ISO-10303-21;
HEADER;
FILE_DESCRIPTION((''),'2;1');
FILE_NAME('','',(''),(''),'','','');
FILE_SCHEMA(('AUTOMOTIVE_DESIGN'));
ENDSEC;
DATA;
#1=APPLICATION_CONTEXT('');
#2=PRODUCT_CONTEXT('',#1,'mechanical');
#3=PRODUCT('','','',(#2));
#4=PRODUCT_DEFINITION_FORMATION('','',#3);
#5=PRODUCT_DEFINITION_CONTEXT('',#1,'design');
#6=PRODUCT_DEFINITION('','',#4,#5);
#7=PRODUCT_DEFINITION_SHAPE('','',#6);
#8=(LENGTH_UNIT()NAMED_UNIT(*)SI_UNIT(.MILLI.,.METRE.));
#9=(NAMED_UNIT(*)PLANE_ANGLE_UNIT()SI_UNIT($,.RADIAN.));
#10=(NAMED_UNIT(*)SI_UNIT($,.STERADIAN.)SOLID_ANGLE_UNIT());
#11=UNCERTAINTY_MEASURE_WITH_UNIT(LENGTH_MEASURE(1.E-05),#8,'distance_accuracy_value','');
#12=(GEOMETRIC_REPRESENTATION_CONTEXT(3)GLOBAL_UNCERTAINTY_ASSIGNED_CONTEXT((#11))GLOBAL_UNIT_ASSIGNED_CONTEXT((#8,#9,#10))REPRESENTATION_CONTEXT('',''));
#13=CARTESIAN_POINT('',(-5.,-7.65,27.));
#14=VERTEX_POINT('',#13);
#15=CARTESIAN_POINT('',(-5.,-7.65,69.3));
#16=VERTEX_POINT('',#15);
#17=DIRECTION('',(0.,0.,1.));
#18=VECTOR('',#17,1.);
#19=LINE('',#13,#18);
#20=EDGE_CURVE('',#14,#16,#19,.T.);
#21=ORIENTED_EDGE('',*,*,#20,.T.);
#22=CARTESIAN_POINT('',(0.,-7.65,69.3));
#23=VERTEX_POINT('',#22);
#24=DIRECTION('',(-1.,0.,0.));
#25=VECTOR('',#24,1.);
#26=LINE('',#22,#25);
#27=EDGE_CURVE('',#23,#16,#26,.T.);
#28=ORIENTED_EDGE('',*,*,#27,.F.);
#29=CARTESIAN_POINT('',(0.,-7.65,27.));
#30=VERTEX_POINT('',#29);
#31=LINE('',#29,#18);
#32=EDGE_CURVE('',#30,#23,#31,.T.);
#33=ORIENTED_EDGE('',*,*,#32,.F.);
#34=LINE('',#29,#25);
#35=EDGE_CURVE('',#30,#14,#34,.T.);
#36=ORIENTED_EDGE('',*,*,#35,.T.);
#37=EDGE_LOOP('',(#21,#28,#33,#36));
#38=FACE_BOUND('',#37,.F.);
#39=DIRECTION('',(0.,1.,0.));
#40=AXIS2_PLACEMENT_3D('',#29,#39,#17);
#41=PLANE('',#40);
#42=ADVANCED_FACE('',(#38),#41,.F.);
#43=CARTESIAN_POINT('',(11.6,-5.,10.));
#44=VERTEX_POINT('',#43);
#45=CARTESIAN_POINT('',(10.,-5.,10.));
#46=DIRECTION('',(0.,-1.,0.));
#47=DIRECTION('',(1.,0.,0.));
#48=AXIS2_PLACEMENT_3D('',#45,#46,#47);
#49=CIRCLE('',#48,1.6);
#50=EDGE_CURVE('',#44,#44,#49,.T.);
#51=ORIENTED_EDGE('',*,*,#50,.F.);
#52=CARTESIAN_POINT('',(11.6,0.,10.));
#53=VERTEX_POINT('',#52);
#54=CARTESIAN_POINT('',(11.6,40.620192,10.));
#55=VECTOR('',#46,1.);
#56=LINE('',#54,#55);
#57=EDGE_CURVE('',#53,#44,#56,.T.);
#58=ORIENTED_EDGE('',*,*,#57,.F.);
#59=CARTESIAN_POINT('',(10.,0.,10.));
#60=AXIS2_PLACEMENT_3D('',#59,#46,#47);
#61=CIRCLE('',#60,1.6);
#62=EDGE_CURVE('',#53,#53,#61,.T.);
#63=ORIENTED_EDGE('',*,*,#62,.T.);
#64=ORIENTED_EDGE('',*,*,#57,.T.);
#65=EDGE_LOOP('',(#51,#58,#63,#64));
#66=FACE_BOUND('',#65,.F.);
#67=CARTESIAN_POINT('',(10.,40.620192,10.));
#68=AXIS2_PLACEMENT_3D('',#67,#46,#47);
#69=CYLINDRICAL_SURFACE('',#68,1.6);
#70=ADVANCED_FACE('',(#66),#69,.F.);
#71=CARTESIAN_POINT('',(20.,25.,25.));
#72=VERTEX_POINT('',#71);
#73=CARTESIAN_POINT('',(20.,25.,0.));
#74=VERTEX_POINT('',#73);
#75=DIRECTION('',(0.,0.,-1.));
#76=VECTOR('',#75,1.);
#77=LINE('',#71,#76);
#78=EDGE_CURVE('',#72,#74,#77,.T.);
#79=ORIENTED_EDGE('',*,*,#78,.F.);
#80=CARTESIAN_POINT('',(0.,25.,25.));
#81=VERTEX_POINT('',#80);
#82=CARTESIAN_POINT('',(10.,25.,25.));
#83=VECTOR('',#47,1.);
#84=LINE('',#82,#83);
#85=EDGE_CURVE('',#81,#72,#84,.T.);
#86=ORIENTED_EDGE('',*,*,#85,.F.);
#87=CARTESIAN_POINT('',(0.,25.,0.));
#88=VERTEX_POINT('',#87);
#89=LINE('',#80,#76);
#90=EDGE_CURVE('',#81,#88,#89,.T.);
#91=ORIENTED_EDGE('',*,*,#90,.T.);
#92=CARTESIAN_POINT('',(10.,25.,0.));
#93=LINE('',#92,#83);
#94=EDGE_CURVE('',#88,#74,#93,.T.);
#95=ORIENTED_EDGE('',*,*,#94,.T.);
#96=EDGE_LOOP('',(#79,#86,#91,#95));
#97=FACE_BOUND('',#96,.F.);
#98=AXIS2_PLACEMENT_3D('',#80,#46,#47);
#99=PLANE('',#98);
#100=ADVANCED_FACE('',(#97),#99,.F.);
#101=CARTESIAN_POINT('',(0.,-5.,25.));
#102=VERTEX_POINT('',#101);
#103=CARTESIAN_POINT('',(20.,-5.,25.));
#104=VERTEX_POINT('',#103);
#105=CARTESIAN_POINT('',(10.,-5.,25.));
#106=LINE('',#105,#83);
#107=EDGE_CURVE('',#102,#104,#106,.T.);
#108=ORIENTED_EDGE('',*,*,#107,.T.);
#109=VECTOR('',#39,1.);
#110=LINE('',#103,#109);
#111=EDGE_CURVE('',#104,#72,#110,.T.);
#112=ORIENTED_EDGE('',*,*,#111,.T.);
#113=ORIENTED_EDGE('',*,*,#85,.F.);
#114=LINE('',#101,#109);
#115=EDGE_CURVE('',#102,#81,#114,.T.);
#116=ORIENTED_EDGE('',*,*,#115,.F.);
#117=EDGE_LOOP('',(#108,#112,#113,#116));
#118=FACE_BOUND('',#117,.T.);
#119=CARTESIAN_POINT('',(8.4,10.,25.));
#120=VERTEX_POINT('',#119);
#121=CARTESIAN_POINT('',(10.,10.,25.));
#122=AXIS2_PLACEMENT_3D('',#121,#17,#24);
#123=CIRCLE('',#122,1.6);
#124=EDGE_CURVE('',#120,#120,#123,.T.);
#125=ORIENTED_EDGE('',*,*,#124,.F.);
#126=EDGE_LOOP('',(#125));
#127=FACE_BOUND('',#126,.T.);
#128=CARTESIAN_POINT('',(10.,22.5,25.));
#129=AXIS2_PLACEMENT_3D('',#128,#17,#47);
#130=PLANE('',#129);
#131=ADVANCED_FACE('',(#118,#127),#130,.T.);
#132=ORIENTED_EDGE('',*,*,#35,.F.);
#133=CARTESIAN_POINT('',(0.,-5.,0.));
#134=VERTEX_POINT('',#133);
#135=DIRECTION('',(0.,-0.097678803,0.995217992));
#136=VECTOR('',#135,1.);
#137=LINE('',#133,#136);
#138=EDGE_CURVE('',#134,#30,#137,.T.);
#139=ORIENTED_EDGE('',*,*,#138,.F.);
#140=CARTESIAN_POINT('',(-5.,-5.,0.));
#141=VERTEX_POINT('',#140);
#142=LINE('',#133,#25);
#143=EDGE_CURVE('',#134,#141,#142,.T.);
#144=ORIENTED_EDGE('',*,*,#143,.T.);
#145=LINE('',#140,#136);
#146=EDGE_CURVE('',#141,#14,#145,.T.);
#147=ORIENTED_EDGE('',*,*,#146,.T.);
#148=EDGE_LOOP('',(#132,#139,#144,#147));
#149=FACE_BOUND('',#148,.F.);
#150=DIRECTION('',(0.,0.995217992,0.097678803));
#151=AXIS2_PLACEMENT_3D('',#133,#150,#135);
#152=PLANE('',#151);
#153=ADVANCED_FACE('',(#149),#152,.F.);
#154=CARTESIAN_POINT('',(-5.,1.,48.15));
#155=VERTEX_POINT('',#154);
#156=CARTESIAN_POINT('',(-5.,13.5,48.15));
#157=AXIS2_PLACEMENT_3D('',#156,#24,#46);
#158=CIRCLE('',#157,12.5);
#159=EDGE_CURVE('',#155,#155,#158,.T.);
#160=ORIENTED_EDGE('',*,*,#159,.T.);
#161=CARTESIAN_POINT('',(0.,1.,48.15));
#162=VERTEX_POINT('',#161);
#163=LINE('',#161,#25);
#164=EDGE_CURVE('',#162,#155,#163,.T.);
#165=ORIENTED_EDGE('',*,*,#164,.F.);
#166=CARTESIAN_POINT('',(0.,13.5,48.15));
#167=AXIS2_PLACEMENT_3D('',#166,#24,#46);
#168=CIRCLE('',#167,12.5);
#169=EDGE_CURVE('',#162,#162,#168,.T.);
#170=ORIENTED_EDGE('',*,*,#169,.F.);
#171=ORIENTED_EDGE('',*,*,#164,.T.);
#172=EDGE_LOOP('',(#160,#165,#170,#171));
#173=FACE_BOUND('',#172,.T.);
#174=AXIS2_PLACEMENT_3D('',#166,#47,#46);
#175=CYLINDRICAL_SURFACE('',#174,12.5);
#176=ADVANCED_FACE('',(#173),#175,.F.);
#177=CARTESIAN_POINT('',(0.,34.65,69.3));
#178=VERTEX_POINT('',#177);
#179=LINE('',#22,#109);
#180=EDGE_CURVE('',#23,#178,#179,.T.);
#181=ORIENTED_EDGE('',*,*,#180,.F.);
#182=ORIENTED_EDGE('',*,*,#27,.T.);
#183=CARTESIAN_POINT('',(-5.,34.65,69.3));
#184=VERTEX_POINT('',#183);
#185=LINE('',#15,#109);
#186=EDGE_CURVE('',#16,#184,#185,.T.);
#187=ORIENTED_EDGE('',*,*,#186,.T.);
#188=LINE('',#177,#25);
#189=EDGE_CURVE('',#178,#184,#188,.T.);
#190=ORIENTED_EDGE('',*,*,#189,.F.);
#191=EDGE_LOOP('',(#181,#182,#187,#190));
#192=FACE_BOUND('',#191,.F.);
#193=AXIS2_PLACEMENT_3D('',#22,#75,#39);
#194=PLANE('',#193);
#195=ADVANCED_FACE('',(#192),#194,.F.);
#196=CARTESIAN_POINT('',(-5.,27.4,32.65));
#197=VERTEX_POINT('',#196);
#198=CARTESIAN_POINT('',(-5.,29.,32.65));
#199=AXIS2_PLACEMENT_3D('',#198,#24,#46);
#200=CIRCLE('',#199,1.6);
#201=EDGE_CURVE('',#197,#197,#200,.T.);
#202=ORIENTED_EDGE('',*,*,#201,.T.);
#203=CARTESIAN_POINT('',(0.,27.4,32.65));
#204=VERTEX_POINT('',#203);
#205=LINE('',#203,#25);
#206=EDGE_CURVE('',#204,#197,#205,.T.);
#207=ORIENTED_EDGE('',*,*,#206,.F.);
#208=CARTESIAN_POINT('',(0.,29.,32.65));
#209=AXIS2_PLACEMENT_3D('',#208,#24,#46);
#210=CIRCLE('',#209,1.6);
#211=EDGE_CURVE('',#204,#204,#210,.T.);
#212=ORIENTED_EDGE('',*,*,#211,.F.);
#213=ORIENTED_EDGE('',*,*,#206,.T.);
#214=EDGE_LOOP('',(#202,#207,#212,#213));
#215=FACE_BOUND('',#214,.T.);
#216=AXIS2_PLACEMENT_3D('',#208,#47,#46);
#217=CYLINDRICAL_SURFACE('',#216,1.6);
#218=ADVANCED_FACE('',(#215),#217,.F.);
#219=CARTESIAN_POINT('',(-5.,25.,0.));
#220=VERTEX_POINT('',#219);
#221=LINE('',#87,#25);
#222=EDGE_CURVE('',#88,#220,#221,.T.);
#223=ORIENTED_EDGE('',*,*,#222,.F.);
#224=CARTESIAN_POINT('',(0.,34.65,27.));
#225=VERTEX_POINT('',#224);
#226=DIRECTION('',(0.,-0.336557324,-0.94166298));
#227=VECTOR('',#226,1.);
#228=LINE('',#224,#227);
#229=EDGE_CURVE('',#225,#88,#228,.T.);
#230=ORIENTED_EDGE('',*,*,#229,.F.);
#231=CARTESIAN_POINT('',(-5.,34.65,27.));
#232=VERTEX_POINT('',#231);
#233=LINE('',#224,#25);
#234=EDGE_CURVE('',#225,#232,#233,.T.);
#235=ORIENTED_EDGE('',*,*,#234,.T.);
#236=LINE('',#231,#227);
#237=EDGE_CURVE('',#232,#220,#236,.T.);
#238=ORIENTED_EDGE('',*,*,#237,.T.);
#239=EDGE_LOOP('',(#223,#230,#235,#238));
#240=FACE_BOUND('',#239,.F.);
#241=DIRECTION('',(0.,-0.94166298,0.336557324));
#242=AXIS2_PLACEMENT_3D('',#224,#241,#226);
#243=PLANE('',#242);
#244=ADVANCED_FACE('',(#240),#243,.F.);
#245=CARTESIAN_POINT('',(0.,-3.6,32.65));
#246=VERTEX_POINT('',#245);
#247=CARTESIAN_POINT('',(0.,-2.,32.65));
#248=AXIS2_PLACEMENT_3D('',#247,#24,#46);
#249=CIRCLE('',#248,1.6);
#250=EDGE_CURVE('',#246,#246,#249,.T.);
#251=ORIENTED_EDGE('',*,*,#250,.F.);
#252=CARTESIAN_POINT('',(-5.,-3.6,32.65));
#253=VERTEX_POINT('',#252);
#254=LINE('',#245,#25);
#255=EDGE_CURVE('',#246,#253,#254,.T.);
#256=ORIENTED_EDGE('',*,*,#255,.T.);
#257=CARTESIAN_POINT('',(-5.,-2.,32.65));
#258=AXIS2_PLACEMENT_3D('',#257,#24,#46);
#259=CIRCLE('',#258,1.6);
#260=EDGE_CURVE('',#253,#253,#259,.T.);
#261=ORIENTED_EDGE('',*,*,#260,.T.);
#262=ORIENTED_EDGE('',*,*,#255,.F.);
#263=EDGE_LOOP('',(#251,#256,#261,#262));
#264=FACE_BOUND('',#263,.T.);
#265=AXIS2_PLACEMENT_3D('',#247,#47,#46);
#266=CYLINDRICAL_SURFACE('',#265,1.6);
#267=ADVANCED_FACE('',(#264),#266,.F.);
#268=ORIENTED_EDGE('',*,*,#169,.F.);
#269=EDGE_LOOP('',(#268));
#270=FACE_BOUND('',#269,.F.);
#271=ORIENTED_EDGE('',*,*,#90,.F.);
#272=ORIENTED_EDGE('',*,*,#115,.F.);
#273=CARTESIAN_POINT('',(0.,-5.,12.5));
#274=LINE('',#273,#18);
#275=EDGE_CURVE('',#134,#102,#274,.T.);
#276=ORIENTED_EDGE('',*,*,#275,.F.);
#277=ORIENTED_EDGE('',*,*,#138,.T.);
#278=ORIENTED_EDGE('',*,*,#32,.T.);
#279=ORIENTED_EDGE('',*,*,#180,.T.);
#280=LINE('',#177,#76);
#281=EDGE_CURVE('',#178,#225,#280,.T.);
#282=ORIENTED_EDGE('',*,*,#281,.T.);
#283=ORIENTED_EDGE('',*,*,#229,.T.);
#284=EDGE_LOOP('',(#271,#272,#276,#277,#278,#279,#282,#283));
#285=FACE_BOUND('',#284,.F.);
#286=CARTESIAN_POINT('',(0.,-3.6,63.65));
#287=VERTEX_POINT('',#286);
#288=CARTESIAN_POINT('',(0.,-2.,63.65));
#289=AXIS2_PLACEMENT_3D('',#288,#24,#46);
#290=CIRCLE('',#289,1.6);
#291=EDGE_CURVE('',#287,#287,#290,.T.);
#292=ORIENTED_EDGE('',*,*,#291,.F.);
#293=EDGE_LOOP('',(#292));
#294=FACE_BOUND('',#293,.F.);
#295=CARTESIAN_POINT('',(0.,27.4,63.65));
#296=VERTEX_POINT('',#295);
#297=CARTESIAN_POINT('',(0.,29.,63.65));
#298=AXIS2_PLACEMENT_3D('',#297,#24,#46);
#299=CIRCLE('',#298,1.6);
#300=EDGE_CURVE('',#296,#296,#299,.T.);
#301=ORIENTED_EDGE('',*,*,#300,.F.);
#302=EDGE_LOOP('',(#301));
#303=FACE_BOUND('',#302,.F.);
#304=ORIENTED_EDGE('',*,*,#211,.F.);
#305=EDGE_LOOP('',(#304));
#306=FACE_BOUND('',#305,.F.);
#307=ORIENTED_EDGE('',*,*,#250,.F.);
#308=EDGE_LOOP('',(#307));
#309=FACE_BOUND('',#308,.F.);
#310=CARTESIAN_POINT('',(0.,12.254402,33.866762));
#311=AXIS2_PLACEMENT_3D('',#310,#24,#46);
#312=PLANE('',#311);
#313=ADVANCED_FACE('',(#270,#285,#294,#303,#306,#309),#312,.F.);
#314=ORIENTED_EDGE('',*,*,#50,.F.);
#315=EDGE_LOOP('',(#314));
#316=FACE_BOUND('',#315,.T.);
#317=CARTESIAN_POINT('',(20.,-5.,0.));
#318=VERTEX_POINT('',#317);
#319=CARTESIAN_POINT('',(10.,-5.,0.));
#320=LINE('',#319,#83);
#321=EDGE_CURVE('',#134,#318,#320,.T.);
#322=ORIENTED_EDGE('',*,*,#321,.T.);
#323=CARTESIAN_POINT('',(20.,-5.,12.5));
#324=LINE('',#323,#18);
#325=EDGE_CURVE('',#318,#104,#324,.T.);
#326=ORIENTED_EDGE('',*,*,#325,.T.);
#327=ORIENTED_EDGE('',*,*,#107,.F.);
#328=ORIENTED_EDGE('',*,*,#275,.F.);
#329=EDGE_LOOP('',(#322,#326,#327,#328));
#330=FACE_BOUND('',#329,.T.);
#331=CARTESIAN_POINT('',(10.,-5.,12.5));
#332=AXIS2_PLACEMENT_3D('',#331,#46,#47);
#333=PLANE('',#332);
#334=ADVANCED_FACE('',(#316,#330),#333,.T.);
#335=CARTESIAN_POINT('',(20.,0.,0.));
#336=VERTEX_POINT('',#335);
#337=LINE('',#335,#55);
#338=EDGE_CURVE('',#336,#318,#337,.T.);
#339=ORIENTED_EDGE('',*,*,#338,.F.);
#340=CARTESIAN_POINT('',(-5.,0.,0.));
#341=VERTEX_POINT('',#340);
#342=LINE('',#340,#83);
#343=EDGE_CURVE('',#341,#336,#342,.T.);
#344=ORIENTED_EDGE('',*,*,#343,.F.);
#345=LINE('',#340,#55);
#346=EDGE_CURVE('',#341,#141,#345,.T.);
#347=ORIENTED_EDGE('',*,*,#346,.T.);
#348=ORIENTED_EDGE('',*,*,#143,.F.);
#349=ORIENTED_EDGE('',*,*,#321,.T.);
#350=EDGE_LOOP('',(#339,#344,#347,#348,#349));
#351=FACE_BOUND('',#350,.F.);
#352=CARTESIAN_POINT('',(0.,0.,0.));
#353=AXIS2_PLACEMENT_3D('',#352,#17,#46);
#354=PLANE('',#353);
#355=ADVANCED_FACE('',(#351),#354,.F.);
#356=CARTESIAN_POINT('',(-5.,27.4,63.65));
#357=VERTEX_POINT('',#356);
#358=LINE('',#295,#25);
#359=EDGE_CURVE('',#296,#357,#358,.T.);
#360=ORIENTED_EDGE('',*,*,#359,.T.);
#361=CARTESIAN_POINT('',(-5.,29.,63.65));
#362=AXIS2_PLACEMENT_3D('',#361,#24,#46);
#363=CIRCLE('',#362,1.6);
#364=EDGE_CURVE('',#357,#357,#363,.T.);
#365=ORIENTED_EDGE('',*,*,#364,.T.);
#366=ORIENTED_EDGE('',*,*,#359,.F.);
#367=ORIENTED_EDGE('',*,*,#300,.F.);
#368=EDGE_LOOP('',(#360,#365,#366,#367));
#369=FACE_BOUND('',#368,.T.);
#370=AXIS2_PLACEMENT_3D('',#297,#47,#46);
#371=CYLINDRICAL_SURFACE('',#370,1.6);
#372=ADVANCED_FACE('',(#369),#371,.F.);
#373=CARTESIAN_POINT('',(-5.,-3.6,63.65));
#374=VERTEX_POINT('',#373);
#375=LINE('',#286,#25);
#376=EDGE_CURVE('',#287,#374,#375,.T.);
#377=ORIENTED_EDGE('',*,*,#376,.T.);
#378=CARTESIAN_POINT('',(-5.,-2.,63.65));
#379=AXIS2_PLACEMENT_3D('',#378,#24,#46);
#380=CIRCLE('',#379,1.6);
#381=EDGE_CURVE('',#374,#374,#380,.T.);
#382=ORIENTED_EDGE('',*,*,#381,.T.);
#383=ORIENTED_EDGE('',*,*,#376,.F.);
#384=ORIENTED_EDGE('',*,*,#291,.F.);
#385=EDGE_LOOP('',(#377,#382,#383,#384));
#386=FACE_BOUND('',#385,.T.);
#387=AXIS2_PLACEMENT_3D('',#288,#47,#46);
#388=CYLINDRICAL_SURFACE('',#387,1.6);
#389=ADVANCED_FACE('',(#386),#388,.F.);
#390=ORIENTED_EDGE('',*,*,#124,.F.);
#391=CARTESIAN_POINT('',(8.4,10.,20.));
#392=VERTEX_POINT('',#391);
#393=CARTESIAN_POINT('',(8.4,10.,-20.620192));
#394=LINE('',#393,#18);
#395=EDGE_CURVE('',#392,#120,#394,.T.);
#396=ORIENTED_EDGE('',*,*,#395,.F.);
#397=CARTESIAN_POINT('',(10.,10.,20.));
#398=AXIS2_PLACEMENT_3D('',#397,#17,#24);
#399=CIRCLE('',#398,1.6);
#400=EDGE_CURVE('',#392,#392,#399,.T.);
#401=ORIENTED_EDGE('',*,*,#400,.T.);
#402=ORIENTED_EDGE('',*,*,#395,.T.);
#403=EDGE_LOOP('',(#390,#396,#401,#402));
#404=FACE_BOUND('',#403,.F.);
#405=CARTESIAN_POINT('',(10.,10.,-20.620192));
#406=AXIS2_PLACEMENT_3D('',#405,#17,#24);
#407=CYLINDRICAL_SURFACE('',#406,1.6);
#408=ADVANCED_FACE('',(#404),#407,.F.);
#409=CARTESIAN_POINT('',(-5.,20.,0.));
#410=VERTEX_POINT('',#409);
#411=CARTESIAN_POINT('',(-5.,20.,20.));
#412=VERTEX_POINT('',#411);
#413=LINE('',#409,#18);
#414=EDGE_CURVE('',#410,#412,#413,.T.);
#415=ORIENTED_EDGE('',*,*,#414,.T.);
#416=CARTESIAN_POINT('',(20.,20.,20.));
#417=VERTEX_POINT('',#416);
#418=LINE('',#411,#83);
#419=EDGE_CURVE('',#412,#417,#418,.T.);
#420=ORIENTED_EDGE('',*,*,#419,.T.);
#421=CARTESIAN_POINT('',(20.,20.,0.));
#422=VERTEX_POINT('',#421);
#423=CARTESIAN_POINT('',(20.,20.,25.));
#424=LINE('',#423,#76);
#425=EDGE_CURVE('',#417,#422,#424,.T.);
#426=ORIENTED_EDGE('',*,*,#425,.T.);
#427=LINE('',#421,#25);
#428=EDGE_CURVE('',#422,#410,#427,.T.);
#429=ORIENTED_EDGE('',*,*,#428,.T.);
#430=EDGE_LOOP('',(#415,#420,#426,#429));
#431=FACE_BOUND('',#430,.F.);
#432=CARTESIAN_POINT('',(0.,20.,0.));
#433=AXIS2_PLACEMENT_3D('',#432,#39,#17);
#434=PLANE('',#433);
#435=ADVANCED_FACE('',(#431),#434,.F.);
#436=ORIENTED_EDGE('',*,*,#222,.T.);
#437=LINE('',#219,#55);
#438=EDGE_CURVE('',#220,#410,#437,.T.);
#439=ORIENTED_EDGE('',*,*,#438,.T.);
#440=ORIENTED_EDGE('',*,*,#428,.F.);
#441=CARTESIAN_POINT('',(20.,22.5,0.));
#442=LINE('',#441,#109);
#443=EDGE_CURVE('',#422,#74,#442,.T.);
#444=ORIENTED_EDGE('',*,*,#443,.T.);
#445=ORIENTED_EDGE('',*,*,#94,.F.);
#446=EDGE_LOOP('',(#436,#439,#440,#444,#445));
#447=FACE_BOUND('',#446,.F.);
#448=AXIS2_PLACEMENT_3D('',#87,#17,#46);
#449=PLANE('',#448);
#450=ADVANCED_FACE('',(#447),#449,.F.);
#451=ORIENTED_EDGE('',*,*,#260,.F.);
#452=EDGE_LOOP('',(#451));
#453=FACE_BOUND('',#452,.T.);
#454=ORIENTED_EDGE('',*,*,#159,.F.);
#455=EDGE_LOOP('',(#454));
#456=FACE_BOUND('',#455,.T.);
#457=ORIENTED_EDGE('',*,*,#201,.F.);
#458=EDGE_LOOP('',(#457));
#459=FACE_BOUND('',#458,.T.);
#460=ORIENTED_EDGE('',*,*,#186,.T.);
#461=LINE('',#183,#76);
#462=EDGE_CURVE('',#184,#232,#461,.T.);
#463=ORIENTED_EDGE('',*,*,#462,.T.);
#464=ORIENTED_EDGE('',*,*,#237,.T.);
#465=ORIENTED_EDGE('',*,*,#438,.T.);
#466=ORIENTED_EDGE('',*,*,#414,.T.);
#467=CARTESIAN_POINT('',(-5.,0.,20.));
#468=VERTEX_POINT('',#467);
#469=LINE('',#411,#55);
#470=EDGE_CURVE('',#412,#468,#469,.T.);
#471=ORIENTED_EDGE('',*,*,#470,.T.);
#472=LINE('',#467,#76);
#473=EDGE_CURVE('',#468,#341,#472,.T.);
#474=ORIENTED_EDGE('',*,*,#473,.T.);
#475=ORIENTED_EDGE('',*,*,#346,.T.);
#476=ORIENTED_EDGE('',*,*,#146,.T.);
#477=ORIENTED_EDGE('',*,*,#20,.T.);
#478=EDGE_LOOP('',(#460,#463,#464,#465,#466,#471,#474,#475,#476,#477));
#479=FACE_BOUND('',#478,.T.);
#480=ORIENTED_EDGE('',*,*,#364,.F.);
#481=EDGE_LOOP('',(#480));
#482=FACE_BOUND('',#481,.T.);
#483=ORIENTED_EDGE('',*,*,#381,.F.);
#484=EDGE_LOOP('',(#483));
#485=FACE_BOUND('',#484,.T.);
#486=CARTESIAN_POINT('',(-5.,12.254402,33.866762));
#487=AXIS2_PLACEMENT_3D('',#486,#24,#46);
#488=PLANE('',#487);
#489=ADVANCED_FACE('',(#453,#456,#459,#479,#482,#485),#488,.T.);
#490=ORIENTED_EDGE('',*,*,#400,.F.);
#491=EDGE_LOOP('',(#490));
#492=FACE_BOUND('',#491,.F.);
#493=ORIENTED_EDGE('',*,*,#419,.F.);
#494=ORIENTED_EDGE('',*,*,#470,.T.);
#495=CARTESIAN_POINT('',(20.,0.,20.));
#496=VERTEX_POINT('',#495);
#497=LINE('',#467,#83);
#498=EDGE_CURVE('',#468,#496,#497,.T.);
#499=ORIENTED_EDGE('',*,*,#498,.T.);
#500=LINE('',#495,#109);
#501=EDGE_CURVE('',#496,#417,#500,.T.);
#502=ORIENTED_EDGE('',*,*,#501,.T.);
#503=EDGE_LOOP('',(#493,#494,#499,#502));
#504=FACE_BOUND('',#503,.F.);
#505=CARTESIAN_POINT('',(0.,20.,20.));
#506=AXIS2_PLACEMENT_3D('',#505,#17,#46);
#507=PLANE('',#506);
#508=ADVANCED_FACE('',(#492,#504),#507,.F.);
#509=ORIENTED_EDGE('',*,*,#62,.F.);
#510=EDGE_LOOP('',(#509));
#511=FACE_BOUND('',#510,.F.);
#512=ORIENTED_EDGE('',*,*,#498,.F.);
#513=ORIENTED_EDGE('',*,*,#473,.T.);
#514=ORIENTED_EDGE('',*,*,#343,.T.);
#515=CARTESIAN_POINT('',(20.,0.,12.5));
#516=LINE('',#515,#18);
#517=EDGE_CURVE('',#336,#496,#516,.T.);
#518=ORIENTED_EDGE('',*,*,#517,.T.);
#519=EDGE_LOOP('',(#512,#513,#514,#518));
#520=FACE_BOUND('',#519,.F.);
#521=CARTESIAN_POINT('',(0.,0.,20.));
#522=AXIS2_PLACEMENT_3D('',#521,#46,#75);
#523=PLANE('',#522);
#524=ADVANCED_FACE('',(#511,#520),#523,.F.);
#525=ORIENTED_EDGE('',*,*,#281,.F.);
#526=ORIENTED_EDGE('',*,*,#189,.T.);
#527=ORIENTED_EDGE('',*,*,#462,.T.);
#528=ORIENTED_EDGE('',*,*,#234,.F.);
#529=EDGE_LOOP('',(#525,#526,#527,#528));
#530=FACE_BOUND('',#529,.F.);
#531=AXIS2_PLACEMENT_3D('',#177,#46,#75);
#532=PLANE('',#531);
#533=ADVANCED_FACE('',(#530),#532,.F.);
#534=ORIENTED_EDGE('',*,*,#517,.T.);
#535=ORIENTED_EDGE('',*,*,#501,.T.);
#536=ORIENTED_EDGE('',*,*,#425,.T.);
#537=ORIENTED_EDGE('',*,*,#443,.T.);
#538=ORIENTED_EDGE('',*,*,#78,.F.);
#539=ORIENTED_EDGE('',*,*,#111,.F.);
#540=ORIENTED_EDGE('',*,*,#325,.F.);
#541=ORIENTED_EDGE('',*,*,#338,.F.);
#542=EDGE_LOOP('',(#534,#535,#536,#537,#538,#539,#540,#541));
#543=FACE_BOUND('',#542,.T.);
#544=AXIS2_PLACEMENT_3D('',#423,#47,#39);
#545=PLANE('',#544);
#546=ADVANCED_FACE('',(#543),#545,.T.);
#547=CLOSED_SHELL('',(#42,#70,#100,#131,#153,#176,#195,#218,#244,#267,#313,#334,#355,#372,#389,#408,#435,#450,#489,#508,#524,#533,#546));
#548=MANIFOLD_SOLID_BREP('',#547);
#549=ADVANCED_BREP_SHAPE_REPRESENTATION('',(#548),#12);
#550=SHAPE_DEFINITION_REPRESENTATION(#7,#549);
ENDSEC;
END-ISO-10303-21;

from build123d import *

# Parameters (mm, degrees)
F0_W       = 20
F0_H       = 25
F1_DEPTH   = 5
F2_W       = 20
F2_H       = 5
F3_DEPTH   = 20
F6_D       = 3.2
F6_ON_F5_D = 3.2
F7_W       = 20
F7_H       = 5
F8_DEPTH   = 25
F9_R       = 1.6
F9_R_2     = 12.5
F10_DEPTH  = 5


with BuildPart() as f1:
    # F0 (on Front) → F1 (new body)
    with BuildSketch(Plane.XZ):
        with Locations((10, 12.5)):
            Rectangle(F0_W, F0_H)
    extrude(amount=F1_DEPTH)

    # F2 (on face) → F3 (join)
    with BuildSketch(Plane(origin=(0, 0, 0), x_dir=(-1, 0, 0), z_dir=(0, 1, 0))):
        with Locations((-10, 22.5)):
            Rectangle(F2_W, F2_H)
    extrude(amount=F3_DEPTH)

    # F6 (through all)
    with Locations(Plane(origin=(0, 0, 0), x_dir=(-1, 0, 0), z_dir=(0, 1, 0))):
        with Locations((-10, 10)):
            Hole(F6_D / 2)

    # F6 on F5 (through all)
    with Locations(Plane(origin=(0, 0, 20), x_dir=(1, 0, 0), z_dir=(0, 0, -1))):
        with Locations((10, -10)):
            Hole(F6_ON_F5_D / 2)

    # F7 (on face) → F8 (join)
    with BuildSketch(Plane.XY.offset(25)):
        with Locations((10, 22.5)):
            Rectangle(F7_W, F7_H)
    extrude(amount=-F8_DEPTH)

    # F9 (on face) → F10 (join)
    with BuildSketch(Plane(origin=(0, 0, 0), x_dir=(0, -1, 0), z_dir=(-1, 0, 0))):
        Polygon((7.65, 27), (7.65, 69.3), (-34.65, 69.3), (-34.65, 27), (-25, 0), (-20, 0), (-20, 20), (0, 20), (0, 0), (5, 0), align=None)
        with Locations((-29, 32.65)):
            Circle(F9_R, mode=Mode.SUBTRACT)
        with Locations((2, 32.65)):
            Circle(F9_R, mode=Mode.SUBTRACT)
        with Locations((-29, 63.65)):
            Circle(F9_R, mode=Mode.SUBTRACT)
        with Locations((-13.5, 48.15)):
            Circle(F9_R_2, mode=Mode.SUBTRACT)
        with Locations((2, 63.65)):
            Circle(F9_R, mode=Mode.SUBTRACT)
    extrude(amount=F10_DEPTH)


solid = f1.part
